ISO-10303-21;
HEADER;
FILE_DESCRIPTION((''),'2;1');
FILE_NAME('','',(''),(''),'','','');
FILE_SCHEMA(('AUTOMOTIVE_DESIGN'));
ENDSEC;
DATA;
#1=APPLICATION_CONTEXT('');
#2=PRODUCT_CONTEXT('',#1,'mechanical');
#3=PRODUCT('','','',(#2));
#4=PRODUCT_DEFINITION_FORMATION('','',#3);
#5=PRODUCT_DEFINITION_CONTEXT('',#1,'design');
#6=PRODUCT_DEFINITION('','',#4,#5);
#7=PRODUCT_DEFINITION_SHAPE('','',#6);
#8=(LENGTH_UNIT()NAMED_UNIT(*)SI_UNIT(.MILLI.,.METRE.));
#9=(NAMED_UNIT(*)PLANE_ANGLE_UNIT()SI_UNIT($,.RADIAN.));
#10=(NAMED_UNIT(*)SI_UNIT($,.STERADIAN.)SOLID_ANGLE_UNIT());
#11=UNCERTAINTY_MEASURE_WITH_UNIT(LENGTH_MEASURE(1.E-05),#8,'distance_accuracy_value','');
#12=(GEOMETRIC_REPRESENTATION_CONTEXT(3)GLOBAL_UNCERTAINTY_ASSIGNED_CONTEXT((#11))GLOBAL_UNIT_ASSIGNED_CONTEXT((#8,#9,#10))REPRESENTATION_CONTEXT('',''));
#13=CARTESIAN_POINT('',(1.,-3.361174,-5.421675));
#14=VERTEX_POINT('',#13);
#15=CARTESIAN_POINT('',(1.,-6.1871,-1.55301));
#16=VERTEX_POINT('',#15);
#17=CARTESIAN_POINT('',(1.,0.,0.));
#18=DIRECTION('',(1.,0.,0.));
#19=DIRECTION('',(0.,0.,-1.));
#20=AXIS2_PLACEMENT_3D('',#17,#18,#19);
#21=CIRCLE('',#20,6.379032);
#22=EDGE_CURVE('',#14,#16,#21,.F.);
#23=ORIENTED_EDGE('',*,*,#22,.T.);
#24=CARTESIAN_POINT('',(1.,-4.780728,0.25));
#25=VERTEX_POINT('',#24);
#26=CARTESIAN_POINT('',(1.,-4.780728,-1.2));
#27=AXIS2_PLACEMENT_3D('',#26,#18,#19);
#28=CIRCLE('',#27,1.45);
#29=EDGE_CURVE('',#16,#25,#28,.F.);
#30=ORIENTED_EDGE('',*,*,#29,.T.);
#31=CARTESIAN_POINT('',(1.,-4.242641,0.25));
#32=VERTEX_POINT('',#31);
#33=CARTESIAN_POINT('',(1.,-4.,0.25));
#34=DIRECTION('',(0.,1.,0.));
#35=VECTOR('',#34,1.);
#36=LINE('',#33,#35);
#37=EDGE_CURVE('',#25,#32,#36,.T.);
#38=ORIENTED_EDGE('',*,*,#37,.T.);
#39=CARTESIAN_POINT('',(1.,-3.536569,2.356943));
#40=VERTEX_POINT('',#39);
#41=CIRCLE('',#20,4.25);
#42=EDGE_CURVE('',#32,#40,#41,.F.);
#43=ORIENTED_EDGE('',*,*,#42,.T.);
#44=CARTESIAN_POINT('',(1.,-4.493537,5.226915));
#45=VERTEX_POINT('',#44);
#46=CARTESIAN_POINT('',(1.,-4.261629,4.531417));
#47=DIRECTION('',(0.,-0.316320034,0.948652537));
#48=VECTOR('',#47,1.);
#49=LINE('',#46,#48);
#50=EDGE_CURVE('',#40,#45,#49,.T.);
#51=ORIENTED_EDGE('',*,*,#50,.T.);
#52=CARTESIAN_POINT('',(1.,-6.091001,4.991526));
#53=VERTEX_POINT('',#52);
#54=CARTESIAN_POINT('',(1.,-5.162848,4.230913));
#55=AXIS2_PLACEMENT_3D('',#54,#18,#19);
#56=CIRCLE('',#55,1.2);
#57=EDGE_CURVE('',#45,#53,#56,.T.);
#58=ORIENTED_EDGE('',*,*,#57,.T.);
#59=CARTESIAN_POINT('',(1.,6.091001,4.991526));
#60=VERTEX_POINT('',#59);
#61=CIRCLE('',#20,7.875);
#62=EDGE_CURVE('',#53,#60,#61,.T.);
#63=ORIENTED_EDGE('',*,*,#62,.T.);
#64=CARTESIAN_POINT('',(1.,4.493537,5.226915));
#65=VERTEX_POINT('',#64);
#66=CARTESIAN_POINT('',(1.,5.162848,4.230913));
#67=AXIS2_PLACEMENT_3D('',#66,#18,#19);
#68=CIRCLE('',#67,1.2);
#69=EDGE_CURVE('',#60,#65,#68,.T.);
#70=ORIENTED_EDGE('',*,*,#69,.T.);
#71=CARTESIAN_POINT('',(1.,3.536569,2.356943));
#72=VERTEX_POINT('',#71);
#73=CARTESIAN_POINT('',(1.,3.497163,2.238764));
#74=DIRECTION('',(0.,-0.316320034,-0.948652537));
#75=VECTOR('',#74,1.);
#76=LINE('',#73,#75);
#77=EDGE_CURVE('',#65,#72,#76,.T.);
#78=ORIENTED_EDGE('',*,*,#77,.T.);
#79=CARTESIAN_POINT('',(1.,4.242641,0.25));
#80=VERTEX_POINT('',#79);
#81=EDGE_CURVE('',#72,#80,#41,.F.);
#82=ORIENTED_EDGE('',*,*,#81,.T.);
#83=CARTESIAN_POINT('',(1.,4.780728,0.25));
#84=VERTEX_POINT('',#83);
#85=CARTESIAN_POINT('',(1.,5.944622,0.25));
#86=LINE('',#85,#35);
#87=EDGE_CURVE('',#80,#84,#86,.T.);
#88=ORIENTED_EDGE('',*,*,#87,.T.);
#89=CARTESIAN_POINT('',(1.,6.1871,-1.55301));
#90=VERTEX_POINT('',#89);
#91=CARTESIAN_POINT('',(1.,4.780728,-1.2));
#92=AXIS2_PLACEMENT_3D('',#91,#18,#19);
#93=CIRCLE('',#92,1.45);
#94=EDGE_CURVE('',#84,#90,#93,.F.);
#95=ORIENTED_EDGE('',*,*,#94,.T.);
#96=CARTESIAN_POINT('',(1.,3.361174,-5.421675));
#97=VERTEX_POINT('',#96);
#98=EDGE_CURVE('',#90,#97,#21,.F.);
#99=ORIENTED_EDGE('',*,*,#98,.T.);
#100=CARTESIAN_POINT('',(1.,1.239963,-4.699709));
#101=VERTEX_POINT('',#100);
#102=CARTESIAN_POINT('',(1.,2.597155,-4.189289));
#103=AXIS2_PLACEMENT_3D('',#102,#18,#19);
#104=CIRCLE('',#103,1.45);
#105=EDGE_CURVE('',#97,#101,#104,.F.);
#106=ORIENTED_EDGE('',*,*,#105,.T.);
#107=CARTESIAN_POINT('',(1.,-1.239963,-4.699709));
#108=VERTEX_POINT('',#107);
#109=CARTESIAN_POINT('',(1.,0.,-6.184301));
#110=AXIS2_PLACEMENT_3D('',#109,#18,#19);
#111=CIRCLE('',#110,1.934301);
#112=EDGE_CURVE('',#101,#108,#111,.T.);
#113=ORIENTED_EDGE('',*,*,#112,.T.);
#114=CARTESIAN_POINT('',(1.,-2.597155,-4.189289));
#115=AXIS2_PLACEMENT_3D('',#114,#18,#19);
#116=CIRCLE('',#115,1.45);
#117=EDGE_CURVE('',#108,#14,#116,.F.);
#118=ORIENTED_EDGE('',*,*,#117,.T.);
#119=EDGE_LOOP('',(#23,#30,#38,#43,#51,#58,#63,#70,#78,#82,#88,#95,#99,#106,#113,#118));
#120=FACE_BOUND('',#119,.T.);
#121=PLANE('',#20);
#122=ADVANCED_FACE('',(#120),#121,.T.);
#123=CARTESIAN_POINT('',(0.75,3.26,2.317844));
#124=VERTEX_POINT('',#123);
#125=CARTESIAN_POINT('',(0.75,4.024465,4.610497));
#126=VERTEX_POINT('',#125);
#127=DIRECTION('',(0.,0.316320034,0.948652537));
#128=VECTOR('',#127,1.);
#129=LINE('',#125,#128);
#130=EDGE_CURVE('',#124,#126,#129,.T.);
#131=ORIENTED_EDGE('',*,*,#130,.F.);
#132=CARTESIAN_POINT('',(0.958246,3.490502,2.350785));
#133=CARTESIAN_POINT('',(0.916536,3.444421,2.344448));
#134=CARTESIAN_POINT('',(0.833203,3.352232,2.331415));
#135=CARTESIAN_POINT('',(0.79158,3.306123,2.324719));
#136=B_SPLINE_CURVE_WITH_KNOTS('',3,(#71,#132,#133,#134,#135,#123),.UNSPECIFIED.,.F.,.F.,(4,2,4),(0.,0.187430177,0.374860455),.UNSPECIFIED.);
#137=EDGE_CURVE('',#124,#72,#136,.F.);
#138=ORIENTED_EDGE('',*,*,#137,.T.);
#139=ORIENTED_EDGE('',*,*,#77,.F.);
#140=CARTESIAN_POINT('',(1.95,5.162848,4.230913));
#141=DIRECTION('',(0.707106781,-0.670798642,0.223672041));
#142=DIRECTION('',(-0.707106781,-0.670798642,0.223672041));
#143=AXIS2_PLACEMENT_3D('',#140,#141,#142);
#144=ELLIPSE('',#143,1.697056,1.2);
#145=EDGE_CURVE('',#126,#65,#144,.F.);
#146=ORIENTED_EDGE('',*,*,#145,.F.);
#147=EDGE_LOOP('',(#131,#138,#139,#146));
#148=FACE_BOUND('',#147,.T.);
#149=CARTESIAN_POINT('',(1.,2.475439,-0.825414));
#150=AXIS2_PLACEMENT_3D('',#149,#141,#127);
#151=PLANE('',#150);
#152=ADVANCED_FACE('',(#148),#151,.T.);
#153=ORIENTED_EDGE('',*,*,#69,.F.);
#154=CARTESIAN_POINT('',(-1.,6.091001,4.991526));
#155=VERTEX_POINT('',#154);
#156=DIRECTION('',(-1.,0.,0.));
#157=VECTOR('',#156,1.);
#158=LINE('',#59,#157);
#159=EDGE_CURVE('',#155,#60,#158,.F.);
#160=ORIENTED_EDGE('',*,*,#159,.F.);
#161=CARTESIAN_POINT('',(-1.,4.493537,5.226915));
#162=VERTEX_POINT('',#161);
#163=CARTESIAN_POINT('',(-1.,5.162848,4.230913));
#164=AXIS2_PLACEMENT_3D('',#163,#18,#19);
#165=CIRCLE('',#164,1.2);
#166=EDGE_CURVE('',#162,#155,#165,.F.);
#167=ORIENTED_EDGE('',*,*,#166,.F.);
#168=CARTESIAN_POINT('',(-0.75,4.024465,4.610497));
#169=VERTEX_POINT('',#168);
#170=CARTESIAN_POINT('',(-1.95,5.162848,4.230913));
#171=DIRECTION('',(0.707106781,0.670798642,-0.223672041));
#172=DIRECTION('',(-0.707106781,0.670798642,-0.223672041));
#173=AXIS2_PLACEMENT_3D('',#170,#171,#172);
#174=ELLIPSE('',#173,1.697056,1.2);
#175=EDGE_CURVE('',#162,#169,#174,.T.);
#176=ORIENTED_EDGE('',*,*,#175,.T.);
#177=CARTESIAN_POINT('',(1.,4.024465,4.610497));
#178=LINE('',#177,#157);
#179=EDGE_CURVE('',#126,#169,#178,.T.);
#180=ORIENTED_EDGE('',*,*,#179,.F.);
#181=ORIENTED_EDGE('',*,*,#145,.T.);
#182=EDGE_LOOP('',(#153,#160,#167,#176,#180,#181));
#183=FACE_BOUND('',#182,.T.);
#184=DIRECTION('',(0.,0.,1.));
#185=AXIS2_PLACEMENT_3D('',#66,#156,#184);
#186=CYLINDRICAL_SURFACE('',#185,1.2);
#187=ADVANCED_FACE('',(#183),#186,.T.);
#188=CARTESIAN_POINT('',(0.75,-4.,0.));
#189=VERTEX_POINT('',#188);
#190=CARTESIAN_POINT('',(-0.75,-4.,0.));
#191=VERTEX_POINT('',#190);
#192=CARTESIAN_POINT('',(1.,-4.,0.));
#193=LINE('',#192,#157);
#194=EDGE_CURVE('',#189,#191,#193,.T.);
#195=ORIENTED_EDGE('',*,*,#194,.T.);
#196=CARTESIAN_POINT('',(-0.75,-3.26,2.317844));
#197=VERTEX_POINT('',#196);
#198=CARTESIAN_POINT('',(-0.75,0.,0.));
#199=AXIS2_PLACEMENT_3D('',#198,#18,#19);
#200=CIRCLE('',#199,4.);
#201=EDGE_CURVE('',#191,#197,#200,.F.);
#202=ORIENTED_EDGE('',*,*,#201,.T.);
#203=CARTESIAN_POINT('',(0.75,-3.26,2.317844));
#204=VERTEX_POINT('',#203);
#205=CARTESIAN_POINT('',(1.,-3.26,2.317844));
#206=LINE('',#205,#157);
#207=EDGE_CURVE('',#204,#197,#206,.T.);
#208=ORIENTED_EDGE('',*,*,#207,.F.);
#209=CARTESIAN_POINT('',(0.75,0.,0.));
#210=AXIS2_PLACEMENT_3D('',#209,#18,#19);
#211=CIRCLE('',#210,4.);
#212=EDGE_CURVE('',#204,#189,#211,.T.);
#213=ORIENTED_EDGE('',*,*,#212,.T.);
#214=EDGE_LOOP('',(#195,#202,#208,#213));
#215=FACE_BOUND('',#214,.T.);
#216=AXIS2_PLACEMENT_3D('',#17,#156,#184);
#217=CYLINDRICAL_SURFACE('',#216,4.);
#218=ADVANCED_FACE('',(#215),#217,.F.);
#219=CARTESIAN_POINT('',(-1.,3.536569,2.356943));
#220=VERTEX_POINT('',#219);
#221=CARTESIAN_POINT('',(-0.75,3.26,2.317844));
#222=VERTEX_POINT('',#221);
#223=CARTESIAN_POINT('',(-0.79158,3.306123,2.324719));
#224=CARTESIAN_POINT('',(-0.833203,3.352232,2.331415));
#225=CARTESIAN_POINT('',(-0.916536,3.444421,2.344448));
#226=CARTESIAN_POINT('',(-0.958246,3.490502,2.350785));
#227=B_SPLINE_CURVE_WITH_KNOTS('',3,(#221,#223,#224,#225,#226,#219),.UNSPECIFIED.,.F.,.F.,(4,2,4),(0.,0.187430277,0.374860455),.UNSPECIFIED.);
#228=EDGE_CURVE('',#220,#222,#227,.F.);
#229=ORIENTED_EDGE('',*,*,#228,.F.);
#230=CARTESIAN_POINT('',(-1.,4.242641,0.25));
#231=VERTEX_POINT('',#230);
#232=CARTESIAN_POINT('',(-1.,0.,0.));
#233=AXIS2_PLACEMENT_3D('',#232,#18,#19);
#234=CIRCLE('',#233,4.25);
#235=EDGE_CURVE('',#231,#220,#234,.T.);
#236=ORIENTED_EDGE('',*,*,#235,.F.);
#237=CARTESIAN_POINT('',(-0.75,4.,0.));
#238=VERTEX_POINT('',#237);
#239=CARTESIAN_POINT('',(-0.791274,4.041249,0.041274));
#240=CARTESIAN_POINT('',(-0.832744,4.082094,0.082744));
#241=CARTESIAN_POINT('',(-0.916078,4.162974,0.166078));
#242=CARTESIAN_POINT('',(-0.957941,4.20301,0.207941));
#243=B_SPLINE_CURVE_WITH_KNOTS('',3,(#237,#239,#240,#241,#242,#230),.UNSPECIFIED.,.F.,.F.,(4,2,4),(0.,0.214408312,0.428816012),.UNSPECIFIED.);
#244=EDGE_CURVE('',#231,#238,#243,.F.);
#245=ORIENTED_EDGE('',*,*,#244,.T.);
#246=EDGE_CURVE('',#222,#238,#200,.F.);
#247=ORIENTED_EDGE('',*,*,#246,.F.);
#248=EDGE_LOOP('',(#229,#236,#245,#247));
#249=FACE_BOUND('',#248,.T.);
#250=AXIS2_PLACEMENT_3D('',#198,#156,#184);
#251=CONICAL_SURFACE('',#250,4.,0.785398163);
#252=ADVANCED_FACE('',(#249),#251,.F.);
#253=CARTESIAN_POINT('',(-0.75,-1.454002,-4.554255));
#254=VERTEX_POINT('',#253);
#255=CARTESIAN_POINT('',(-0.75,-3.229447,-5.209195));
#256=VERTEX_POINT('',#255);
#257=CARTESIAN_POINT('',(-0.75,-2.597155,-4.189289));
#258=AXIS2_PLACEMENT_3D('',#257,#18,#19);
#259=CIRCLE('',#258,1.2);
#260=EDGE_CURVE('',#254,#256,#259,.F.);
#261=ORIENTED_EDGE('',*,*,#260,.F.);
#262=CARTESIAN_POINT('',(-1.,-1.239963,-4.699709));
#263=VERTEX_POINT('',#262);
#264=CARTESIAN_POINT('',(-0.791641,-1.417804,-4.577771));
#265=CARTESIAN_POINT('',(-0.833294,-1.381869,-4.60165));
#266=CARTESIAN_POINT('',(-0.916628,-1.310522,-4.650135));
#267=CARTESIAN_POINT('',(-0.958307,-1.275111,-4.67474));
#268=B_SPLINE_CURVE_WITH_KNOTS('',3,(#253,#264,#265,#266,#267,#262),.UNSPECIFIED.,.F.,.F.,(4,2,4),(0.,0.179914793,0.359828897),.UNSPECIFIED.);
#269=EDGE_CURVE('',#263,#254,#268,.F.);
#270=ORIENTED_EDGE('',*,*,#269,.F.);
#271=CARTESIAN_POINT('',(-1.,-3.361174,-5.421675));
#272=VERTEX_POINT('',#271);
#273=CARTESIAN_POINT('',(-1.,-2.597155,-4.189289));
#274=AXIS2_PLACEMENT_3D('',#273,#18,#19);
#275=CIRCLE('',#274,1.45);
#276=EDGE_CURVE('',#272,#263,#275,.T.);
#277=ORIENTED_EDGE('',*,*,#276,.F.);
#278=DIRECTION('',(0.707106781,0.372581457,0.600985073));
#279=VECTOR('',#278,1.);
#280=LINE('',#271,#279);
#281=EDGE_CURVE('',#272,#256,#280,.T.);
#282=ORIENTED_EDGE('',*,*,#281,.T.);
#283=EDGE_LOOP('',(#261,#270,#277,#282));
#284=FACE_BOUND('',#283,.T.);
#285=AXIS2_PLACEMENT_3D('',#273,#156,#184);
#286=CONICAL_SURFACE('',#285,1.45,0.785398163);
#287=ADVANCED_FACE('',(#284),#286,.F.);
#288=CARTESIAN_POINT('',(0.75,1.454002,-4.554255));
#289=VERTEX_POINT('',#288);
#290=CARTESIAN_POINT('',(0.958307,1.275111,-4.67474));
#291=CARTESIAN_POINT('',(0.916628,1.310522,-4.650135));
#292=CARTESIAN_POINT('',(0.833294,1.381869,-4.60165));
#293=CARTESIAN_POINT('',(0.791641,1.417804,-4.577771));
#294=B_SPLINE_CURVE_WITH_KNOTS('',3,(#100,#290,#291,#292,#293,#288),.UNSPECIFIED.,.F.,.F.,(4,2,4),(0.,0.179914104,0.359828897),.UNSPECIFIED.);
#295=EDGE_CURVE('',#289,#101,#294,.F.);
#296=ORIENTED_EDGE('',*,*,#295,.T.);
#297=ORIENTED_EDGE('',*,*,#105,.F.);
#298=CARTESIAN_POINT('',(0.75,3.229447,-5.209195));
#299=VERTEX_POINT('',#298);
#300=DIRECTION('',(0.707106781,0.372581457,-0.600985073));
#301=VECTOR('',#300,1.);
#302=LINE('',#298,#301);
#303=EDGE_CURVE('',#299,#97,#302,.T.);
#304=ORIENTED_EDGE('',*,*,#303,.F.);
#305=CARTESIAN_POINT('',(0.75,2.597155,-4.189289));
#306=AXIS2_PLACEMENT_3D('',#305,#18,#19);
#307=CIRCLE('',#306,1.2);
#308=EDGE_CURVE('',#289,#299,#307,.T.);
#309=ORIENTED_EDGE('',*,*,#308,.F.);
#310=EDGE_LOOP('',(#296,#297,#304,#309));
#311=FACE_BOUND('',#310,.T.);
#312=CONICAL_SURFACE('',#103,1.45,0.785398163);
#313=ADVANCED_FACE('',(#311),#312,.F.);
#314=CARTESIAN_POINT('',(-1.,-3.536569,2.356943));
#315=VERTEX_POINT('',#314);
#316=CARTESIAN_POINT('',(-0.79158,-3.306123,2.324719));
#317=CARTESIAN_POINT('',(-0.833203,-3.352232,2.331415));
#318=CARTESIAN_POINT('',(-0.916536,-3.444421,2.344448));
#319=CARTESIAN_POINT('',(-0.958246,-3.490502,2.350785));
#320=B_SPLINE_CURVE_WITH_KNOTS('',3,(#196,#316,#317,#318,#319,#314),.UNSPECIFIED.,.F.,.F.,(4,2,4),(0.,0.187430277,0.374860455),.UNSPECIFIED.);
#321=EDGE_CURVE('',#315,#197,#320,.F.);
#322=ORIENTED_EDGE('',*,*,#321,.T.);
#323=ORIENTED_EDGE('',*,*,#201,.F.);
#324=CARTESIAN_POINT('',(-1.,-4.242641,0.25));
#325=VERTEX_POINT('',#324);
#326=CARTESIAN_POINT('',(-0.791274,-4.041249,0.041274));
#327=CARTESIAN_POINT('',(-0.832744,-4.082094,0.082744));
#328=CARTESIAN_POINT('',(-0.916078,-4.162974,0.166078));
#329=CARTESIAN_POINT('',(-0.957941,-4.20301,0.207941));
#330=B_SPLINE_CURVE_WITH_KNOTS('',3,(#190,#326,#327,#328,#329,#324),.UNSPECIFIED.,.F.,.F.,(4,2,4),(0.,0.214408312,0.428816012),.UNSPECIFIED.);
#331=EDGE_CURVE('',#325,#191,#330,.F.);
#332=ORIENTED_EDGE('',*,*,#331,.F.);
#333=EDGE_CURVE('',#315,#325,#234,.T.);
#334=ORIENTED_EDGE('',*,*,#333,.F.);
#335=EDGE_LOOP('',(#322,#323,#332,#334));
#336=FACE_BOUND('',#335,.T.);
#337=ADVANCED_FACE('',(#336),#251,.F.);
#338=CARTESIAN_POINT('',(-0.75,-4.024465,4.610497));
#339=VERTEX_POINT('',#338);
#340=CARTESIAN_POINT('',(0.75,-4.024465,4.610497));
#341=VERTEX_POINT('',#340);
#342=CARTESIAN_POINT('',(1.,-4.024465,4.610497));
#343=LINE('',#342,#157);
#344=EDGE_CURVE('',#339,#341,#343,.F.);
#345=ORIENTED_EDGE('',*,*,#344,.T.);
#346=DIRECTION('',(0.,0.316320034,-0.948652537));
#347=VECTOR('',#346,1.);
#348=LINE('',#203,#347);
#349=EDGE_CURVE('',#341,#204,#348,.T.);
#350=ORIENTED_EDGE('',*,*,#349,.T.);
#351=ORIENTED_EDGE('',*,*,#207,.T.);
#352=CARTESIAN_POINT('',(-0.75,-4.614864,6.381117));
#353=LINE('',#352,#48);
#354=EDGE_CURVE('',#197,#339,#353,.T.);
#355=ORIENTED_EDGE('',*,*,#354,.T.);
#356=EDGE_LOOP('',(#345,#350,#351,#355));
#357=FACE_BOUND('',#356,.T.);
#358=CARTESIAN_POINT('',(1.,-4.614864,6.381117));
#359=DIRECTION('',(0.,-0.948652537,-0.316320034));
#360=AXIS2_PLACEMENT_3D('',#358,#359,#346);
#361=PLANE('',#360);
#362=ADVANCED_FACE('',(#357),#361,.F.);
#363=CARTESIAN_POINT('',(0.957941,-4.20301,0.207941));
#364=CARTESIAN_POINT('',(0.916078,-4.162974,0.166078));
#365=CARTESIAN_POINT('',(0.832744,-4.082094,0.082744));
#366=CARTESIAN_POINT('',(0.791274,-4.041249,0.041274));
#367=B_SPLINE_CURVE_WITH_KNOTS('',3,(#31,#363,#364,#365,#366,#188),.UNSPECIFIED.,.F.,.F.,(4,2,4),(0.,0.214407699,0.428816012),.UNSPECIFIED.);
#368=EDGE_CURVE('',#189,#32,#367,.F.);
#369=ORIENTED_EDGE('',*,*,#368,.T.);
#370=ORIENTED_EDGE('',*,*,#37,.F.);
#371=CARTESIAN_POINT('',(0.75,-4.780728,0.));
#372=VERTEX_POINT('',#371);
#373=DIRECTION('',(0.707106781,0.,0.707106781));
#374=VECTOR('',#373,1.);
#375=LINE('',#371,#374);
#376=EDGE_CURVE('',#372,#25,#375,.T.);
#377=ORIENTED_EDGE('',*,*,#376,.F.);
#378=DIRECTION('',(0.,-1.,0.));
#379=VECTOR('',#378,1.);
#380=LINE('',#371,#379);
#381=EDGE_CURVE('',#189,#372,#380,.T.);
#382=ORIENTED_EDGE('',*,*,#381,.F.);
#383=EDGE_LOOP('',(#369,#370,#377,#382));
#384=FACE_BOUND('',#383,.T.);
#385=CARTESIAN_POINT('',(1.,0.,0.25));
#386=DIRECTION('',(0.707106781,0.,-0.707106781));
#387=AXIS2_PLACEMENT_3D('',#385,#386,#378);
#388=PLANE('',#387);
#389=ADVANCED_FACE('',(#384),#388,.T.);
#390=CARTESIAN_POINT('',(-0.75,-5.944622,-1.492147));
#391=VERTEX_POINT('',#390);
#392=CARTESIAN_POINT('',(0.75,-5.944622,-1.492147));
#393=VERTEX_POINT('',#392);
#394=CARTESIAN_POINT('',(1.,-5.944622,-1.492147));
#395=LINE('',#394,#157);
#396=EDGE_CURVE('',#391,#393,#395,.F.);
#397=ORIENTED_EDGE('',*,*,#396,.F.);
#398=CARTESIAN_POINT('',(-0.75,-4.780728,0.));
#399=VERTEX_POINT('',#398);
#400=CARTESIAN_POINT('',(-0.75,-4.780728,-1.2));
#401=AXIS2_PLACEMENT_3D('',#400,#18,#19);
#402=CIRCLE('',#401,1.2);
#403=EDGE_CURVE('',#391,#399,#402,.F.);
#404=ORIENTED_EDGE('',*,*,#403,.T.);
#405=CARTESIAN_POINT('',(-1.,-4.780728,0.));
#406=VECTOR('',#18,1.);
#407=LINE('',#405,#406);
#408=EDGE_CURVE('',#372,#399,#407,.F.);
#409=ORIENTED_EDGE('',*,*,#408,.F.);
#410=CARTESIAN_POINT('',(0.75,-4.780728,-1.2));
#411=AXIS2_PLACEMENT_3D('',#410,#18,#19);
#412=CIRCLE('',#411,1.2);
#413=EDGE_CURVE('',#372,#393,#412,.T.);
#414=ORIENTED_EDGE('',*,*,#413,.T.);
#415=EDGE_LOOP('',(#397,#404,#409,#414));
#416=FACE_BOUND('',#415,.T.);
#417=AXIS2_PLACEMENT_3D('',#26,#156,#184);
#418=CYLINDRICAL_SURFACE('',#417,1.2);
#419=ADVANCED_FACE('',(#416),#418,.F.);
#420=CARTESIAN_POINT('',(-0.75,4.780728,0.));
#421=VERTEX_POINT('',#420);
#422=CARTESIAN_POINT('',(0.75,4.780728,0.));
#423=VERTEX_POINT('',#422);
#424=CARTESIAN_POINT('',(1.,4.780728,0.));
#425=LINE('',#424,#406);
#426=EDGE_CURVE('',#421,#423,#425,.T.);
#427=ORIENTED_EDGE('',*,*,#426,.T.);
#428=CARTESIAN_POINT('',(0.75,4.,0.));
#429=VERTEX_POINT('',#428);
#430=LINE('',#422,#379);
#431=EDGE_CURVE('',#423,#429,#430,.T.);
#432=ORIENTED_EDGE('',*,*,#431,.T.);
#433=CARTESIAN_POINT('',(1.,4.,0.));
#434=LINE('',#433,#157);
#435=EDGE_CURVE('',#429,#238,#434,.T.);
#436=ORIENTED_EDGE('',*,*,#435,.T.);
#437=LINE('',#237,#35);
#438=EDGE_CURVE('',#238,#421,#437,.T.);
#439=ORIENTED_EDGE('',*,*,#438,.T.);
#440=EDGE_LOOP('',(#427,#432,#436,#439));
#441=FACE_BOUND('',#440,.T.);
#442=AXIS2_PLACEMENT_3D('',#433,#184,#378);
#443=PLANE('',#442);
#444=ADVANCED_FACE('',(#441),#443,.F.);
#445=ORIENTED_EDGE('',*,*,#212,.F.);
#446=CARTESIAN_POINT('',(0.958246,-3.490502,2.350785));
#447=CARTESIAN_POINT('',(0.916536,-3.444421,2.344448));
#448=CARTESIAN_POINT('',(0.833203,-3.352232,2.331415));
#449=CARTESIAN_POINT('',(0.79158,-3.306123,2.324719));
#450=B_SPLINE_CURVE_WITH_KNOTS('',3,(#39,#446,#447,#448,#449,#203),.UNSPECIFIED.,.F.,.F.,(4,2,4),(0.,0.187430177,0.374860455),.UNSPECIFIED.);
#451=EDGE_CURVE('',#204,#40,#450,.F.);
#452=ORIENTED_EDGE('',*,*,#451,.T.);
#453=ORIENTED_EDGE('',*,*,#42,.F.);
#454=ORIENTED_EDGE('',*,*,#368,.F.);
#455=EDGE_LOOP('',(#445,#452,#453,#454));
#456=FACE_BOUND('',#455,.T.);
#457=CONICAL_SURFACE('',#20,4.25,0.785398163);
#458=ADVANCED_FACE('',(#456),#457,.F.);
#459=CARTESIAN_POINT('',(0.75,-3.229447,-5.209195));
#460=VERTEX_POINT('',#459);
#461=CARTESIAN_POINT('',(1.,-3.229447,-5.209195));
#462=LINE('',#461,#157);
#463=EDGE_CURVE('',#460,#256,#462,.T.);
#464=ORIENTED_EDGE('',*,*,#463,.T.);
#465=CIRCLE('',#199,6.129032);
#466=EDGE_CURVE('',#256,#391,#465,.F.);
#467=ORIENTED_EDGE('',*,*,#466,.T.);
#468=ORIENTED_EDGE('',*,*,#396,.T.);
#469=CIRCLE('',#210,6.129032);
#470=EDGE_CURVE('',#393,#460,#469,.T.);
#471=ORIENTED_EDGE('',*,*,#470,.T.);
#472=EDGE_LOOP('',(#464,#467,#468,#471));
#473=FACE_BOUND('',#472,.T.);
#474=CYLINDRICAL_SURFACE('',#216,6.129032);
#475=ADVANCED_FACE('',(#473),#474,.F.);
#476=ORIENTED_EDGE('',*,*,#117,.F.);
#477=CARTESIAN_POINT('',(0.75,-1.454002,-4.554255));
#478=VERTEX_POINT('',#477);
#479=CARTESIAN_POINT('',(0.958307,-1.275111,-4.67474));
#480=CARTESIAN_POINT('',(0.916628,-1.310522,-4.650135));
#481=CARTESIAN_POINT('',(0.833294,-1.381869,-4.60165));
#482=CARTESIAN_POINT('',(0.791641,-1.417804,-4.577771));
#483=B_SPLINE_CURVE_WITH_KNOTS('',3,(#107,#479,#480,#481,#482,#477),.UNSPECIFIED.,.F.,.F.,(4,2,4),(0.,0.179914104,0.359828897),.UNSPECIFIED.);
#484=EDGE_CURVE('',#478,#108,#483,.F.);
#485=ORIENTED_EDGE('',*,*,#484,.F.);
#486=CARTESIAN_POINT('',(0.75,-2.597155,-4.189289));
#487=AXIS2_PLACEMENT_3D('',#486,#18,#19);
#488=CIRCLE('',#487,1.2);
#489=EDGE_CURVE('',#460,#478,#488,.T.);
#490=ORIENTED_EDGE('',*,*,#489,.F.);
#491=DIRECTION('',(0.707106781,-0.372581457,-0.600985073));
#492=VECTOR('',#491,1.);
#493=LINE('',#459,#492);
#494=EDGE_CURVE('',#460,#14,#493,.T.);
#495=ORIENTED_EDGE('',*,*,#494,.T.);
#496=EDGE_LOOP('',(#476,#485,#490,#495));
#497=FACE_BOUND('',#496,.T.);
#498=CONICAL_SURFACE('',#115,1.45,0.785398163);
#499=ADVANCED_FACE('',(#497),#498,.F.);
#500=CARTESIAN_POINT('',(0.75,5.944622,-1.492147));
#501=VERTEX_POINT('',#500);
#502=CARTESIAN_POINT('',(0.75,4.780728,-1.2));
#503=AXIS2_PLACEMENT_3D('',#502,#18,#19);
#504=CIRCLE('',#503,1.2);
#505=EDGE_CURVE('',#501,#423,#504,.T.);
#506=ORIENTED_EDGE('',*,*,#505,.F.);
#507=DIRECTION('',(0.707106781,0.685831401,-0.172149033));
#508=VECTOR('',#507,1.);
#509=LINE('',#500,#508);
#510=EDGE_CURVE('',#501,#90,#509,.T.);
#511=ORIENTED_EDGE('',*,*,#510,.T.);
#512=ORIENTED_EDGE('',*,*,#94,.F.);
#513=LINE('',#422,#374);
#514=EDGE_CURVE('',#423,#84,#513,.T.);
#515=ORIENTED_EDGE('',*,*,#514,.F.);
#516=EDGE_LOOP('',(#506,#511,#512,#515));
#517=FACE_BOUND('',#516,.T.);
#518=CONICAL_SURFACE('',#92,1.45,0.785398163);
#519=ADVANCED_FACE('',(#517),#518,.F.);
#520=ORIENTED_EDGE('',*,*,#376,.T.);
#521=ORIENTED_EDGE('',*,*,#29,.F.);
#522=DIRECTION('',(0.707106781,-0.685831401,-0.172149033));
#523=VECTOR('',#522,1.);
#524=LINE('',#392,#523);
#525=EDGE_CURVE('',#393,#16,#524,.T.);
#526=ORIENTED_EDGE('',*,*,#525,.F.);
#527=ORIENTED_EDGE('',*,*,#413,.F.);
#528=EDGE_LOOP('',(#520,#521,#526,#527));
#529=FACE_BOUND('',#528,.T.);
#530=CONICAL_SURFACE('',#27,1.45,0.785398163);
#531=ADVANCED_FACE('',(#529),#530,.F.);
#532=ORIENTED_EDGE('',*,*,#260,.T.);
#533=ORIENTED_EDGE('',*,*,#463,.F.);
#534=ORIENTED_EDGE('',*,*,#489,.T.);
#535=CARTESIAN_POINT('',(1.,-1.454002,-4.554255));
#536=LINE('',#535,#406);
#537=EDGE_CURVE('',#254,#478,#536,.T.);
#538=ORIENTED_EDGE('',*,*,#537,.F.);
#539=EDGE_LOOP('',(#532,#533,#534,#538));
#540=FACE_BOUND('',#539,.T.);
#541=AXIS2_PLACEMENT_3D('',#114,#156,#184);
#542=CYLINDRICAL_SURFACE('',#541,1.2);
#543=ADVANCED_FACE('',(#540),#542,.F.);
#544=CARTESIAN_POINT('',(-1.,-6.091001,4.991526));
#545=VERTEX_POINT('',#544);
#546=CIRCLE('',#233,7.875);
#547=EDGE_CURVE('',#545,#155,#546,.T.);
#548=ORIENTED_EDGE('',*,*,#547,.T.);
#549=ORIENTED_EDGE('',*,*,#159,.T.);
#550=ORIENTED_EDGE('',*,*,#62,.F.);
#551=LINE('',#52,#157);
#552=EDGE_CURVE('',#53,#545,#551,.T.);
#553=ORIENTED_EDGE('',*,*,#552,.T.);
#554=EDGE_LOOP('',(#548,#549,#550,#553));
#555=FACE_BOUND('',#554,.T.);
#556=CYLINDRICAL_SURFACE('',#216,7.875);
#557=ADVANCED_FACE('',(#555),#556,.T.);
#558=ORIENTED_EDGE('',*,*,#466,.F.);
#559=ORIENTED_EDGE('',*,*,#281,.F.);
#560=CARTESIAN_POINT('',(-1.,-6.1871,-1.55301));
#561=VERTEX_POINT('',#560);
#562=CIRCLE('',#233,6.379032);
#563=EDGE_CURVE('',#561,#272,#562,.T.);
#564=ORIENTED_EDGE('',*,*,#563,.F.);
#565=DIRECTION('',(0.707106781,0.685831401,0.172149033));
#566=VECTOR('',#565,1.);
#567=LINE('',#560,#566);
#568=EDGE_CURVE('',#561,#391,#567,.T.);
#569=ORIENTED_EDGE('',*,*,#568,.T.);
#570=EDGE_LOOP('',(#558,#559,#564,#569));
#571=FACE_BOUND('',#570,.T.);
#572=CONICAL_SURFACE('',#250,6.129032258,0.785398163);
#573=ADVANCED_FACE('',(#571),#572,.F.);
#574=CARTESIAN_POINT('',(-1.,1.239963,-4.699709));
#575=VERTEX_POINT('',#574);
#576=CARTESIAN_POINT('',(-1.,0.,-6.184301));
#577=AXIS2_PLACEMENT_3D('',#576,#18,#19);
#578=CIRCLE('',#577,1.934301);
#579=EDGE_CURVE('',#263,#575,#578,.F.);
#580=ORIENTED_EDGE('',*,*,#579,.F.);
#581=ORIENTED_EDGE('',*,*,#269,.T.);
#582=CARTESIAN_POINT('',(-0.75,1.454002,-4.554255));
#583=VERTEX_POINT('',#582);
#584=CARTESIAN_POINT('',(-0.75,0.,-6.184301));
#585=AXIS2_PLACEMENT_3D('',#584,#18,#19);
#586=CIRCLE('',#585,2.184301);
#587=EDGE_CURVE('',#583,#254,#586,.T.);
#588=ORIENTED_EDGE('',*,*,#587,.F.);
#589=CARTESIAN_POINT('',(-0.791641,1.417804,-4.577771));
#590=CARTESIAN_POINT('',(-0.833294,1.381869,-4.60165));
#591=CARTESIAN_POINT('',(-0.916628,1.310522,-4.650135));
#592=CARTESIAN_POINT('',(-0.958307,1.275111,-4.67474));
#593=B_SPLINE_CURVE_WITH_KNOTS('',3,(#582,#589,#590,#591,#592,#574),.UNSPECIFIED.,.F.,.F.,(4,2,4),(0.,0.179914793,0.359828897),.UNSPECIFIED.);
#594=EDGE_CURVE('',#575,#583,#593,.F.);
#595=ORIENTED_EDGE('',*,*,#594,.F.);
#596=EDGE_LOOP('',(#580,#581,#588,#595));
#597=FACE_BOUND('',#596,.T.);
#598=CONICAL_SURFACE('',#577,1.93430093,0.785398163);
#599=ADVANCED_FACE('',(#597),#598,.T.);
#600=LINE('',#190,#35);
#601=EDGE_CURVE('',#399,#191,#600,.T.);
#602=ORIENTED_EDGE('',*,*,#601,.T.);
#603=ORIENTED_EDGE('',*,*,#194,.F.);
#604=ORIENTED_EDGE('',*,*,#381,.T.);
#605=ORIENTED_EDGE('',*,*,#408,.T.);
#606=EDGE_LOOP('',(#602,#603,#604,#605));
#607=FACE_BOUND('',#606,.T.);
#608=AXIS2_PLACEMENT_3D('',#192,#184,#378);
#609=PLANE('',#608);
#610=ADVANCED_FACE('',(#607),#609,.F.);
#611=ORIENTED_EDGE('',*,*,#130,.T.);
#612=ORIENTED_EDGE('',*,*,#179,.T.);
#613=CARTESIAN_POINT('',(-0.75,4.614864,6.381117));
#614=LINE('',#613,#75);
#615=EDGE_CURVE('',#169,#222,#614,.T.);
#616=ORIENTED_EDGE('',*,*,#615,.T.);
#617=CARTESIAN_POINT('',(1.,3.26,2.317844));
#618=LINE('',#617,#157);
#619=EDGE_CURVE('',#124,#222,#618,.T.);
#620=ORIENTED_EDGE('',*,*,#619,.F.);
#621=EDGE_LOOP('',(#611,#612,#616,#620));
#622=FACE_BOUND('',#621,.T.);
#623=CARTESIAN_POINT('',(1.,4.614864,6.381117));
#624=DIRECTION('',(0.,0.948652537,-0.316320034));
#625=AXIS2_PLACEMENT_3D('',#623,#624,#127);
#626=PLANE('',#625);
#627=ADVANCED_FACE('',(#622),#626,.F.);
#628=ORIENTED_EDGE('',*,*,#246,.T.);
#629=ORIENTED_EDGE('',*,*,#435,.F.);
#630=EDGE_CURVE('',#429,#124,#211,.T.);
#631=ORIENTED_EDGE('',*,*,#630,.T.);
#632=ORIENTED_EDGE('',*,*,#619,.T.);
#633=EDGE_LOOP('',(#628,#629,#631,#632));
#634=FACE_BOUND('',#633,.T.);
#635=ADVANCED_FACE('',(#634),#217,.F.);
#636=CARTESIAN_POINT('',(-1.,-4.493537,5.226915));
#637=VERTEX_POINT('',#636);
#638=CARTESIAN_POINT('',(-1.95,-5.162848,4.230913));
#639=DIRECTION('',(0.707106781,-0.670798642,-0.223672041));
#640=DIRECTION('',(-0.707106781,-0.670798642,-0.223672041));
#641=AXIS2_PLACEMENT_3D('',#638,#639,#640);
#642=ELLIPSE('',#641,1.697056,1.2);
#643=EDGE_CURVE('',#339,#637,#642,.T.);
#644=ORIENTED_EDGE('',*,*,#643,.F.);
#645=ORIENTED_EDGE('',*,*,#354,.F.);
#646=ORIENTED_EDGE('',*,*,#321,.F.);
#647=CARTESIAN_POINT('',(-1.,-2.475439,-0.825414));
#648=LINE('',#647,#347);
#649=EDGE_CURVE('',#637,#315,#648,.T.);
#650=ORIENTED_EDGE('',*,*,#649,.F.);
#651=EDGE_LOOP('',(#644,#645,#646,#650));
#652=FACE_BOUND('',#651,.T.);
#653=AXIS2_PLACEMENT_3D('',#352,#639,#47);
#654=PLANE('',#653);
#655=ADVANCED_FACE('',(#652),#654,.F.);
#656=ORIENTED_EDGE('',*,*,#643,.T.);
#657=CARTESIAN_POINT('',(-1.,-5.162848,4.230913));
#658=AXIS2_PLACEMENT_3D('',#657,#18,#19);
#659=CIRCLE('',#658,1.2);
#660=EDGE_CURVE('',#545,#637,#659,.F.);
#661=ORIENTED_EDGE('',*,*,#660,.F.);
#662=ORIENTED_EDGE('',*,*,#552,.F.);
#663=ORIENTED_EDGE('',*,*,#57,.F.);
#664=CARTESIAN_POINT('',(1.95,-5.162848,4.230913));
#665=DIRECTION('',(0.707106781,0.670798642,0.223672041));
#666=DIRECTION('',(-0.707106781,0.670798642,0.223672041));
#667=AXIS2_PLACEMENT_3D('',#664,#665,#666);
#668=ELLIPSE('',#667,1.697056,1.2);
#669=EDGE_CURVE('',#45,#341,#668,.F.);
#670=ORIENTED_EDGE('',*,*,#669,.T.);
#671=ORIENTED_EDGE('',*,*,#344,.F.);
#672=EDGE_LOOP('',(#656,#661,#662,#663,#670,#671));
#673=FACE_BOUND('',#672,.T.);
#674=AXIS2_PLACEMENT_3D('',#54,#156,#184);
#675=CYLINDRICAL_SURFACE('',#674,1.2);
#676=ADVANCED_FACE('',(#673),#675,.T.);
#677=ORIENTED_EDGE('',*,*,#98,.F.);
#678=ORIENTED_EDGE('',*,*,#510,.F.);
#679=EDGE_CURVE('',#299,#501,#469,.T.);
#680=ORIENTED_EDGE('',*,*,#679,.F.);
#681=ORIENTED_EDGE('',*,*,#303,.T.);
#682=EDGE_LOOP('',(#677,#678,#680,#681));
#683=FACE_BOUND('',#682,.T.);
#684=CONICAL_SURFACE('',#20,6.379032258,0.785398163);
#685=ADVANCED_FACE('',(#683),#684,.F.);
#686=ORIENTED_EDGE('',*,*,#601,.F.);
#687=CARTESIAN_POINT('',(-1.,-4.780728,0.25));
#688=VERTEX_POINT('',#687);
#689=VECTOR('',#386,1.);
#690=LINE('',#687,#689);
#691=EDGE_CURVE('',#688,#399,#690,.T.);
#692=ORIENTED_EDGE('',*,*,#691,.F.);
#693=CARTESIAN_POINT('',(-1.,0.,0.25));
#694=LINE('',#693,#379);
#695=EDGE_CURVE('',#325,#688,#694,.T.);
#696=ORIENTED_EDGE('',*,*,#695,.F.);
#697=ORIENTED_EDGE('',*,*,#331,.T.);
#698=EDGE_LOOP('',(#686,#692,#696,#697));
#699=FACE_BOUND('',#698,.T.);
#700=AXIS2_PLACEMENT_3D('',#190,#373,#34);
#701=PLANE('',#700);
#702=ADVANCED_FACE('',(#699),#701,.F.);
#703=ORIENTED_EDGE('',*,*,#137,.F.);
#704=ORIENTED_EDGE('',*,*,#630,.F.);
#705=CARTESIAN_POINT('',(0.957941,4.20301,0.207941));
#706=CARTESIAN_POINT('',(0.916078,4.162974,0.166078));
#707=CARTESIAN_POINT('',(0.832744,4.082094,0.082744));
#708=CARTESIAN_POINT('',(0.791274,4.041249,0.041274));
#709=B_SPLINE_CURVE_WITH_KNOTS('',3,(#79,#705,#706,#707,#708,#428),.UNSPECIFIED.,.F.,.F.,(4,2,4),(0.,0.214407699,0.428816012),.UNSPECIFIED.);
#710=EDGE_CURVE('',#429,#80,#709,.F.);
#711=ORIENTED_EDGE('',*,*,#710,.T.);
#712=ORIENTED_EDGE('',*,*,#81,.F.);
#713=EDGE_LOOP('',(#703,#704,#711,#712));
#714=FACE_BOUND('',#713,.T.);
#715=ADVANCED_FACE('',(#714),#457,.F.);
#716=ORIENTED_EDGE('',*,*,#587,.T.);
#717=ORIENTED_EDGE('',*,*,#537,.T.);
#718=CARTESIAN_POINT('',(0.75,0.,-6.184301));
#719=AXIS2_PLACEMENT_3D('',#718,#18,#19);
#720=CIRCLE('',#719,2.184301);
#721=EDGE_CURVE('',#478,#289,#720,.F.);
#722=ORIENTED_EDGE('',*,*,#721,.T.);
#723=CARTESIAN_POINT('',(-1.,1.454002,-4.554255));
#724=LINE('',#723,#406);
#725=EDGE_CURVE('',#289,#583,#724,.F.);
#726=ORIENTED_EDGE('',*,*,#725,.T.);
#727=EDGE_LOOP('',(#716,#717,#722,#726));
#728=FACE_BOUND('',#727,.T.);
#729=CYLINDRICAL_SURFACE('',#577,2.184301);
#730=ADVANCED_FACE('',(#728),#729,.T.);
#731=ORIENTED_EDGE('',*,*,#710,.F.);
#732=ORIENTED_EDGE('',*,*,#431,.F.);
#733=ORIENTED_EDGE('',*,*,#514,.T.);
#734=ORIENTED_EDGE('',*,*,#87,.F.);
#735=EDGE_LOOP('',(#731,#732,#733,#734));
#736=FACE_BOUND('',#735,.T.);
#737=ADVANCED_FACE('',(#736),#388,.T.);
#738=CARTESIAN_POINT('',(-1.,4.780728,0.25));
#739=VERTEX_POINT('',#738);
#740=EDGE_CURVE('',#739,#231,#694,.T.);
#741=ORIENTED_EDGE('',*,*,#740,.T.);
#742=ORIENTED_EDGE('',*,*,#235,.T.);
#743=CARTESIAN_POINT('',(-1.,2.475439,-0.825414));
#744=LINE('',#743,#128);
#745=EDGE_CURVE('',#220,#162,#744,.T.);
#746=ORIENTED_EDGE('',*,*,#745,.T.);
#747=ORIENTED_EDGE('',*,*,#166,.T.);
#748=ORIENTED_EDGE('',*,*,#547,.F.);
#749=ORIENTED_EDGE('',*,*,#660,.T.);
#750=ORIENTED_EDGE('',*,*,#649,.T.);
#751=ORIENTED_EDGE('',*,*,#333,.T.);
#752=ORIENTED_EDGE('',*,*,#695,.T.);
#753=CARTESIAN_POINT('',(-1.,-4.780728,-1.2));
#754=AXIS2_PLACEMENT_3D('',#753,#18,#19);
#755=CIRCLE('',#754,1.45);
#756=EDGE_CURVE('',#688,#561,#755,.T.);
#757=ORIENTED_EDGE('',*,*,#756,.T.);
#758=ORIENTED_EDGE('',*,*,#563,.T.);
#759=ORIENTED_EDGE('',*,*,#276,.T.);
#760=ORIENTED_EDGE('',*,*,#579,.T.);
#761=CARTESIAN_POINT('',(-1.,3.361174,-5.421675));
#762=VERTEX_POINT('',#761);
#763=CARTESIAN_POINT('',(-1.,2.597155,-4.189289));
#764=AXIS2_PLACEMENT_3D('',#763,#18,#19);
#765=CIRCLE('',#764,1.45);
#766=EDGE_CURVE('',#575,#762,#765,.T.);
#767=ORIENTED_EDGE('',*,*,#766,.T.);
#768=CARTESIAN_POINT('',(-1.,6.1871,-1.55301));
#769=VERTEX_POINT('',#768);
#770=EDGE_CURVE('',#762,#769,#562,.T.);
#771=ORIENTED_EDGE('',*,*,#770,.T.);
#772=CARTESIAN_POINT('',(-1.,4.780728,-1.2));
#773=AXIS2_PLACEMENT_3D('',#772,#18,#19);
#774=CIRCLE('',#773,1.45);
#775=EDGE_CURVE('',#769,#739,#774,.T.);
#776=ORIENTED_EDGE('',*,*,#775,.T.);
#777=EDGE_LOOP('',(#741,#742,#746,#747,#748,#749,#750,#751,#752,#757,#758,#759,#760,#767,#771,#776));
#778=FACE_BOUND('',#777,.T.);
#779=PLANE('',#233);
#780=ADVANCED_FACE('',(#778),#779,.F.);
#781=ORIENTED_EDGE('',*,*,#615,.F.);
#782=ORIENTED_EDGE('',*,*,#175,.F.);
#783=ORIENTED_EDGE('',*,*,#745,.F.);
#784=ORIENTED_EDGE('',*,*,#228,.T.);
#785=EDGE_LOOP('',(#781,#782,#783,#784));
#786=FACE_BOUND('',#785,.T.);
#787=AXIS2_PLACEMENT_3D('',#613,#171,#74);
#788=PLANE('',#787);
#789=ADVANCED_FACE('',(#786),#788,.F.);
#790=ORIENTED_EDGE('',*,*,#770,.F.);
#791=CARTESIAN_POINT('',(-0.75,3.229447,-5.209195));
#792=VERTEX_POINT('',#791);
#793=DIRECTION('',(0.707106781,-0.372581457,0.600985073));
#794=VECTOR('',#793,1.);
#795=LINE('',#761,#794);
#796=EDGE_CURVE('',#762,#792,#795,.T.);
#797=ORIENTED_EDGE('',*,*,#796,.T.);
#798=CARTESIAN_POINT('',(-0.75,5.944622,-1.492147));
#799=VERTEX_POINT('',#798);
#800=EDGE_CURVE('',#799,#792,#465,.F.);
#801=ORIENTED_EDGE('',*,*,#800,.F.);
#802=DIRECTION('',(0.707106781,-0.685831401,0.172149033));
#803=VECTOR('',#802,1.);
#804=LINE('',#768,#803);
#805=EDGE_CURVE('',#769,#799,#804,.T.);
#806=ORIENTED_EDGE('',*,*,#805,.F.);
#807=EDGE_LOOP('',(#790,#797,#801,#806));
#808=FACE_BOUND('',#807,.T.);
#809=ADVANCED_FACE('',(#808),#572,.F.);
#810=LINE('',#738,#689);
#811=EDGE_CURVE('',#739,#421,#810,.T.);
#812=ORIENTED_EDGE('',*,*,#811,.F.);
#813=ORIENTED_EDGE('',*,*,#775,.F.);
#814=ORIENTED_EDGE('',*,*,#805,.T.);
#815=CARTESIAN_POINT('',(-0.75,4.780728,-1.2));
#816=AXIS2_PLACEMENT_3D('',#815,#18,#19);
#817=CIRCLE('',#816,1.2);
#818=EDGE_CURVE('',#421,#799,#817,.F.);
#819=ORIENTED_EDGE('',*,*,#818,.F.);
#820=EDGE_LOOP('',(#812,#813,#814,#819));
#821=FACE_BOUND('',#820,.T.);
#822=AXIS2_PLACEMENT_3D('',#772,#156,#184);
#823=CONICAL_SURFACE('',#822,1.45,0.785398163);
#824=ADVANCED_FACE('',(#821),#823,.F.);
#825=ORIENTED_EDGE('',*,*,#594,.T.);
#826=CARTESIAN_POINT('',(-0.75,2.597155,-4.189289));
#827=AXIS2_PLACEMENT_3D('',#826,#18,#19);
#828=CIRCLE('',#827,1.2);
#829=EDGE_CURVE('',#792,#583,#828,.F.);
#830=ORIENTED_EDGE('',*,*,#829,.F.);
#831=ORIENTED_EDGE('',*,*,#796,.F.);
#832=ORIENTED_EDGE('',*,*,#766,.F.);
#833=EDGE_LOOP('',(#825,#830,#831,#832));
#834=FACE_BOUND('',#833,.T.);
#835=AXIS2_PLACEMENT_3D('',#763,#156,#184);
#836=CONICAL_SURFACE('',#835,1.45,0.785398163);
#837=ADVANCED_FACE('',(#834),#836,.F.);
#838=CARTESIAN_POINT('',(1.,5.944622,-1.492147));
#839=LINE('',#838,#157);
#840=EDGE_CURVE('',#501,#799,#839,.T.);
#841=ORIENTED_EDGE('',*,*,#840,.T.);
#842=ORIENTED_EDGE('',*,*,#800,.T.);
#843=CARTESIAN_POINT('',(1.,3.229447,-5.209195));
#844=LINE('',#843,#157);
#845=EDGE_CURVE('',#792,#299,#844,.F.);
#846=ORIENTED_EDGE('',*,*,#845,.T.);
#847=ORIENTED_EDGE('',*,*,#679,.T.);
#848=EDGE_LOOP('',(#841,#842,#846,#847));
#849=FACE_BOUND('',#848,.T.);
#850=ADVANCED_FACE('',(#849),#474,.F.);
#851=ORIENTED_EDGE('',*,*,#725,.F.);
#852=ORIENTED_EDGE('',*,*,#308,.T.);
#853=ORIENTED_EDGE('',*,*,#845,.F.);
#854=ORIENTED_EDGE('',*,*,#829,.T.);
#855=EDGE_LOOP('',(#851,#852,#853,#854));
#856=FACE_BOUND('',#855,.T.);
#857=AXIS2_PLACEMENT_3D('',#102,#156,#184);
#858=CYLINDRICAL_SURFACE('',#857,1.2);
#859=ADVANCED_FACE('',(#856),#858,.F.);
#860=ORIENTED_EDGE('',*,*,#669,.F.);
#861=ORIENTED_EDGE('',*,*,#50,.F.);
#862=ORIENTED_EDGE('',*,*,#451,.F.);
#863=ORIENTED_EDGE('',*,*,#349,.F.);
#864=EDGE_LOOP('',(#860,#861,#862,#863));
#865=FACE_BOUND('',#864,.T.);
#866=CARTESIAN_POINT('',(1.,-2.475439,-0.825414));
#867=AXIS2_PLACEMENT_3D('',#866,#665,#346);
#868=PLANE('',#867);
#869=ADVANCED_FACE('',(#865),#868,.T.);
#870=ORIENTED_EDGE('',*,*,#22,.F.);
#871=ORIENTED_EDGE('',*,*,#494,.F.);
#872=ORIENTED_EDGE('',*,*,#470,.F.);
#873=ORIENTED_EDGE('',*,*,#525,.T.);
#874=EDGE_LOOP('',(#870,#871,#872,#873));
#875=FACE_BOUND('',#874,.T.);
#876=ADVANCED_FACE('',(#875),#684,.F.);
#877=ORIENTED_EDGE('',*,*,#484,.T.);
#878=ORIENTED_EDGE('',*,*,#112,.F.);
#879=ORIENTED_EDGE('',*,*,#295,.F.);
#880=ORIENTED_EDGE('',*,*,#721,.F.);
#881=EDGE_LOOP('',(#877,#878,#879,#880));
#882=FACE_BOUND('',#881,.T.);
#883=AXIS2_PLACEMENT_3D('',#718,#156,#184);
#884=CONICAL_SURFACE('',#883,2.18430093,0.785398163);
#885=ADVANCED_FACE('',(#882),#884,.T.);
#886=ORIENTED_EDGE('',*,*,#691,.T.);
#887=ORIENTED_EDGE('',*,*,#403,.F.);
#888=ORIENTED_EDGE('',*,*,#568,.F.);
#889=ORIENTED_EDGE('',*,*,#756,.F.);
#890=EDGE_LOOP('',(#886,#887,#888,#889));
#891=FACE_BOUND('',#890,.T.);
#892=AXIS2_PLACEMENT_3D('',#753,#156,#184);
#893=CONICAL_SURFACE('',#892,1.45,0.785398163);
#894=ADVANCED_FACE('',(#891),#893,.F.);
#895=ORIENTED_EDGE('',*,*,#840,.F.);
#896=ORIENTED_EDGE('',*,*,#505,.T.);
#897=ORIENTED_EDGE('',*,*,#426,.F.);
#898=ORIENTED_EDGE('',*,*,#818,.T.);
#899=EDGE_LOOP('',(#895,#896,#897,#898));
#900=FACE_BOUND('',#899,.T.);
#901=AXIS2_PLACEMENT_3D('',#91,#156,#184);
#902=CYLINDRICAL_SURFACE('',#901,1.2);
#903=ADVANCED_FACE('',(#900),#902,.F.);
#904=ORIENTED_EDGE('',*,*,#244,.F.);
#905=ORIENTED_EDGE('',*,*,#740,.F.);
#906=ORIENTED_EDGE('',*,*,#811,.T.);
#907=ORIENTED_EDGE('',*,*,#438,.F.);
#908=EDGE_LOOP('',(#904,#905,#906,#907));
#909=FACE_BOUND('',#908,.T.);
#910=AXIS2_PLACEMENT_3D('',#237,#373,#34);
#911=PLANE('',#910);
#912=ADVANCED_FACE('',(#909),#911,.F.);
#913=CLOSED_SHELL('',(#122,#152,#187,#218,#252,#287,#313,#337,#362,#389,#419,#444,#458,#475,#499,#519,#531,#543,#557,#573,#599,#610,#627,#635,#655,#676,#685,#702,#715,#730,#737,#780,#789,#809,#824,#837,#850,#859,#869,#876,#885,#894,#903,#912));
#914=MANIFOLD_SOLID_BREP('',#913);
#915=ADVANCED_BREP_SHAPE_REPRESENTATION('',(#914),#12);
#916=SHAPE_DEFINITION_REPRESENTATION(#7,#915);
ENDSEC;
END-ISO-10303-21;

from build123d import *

# Parameters (mm, degrees)
EXTRUDE1_DEPTH          = 1
FILLET1_R               = 1.2
CUT_EXTRUDE1_DEPTH      = 12.181737343
CUT_EXTRUDE1_DEPTH_BACK = 12.181737343
CHAMFER1_SIZE           = 0.25


with BuildPart() as part:
    # Sketch1 → Extrude1 (new, symmetric)
    with BuildSketch(Plane(origin=(0, 0, 0), x_dir=(0, 0, -1), z_dir=(1, 0, 0))):
        with BuildLine():
            Line((-6.381117354, -4.614863629), (-2.317843826, -3.26))
            ThreePointArc((-2.317843826, -3.26), (-1.216552506, -3.810511777), (0, -4))
            Line((0, -4), (0, -6.129032258))
            ThreePointArc((0, -6.129032258), (3.615250795, -4.949242175), (5.8386874, -1.864072388))
            Line((5.8386874, -1.864072388), (3.810511777, -1.216552506))
            ThreePointArc((3.810511777, -1.216552506), (4, 0), (3.810511777, 1.216552506))
            Line((3.810511777, 1.216552506), (5.8386874, 1.864072388))
            ThreePointArc((5.8386874, 1.864072388), (3.615250795, 4.949242175), (0, 6.129032258))
            Line((0, 6.129032258), (0, 4))
            ThreePointArc((0, 4), (-1.216552506, 3.810511777), (-2.317843826, 3.26))
            Line((-2.317843826, 3.26), (-6.381117354, 4.614863629))
            ThreePointArc((-6.381117354, 4.614863629), (7.875, 0), (-6.381117354, -4.614863629))
        make_face()
    extrude(amount=EXTRUDE1_DEPTH, both=True)

    # Fillet1
    fillet1_edges = [part.edges().sort_by_distance(p)[0] for p in [
        (0, -4.614863629, 6.381117354),
        (0, -6.129032258, 0),
        (0, -1.864072388, -5.8386874),
        (0, 1.864072388, -5.8386874),
        (0, 6.129032258, 0),
        (0, 4.614863629, 6.381117354),
    ]]
    fillet(fillet1_edges, radius=FILLET1_R)

    # Sketch4 → Cut-Extrude1 (cut, two sides: drawn at the far end of the back side and taken through both)
    with BuildSketch(Plane(origin=(0, 0, 0), x_dir=(0, 0, -1), z_dir=(1, 0, 0)).offset(-CUT_EXTRUDE1_DEPTH_BACK)):
        with BuildLine():
            Line((0, 4.780727874), (0, -4.780727874))
            ThreePointArc((0, -4.780727874), (0.461953903, -5.726924448), (1.492146597, -5.944622356))
            ThreePointArc((1.492146597, -5.944622356), (3.615250795, -4.949242175), (5.209194703, -3.229446851))
            ThreePointArc((5.209194703, -3.229446851), (5.315130469, -2.181846269), (4.554254966, -1.454001619))
            ThreePointArc((4.554254966, -1.454001619), (4, 0), (4.554254966, 1.454001619))
            ThreePointArc((4.554254966, 1.454001619), (5.315130469, 2.181846269), (5.209194703, 3.229446851))
            ThreePointArc((5.209194703, 3.229446851), (3.615250795, 4.949242175), (1.492146597, 5.944622356))
            ThreePointArc((1.492146597, 5.944622356), (0.461953903, 5.726924448), (0, 4.780727874))
        make_face()
    extrude(amount=CUT_EXTRUDE1_DEPTH + CUT_EXTRUDE1_DEPTH_BACK, mode=Mode.SUBTRACT)

    # Chamfer1
    # the kernel refuses this chamfer: 0.25 mm, written as the material it takes off along each edge
    with BuildSketch(Plane(origin=(1, 3.056631288, 1.707935428), x_dir=(0, 0.9486525372163972, -0.31632003356235944), z_dir=(0, 0.31632003356235944, 0.9486525372163972)), Plane(origin=(-1, 3.056631288, 1.707935428), x_dir=(1, 0, 0), z_dir=(0, 0.31632003356235944, 0.9486525372163972)), Plane(origin=(-1, -4.370192178, 5.647340899), x_dir=(1, 0, 0), z_dir=(0, 0.3163200335623596, -0.9486525372163971))) as chamfer1_piece_1:
        Polygon((CHAMFER1_SIZE, 0), (0, CHAMFER1_SIZE), (0, 0), align=None)
    extrude(amount=4.15263262, mode=Mode.SUBTRACT)
    with BuildSketch(Plane(origin=(1, 0, 0), x_dir=(0, 0.9871090886928867, -0.16004888946787105), z_dir=(0, -0.16004888946787105, -0.9871090886928867))) as chamfer1_piece_2:
        Polygon((4 + CHAMFER1_SIZE, 0), (4, -CHAMFER1_SIZE), (4, 0), align=None)
    revolve(axis=Axis((1, 0, 0), (1, 0, 0)), revolution_arc=53.832106013, mode=Mode.SUBTRACT)
    with BuildSketch(Plane(origin=(1, 4.780727874, -1.2), x_dir=(0, 0, 1), z_dir=(0, -1, 0))) as chamfer1_piece_3:
        Polygon((1.2 + CHAMFER1_SIZE, 0), (1.2, CHAMFER1_SIZE), (1.2, 0), align=None)
    revolve(axis=Axis((1, 4.780727874, -1.2), (-1, 0, 0)), revolution_arc=104.090576784, mode=Mode.SUBTRACT)
    with BuildSketch(Plane(origin=(1, 0, 0), x_dir=(0, 0.5269097493911834, -0.8499212410550288), z_dir=(0, -0.8499212410550288, -0.5269097493911834))) as chamfer1_piece_4:
        Polygon((6.129032258 + CHAMFER1_SIZE, 0), (6.129032258, -CHAMFER1_SIZE), (6.129032258, 0), align=None)
    revolve(axis=Axis((1, 0, 0), (1, 0, 0)), revolution_arc=44.112527376, mode=Mode.SUBTRACT)
    with BuildSketch(Plane(origin=(1, 2.597155152, -4.189289214), x_dir=(0, 0.5269097493911832, -0.8499212410550289), z_dir=(0, 0.8499212410550289, 0.5269097493911832))) as chamfer1_piece_5:
        Polygon((1.2 + CHAMFER1_SIZE, 0), (1.2, CHAMFER1_SIZE), (1.2, 0), align=None)
    revolve(axis=Axis((1, 2.597155152, -4.189289214), (-1, 0, 0)), revolution_arc=134.804277629, mode=Mode.SUBTRACT)
    with BuildSketch(Plane(origin=(1, 0, -6.18430093), x_dir=(0, 0.8535787339825979, 0.5209638614075505), z_dir=(0, 0.5209638614075505, -0.8535787339825979))) as chamfer1_piece_6:
        Polygon((2.18430093 - CHAMFER1_SIZE, 0), (2.18430093, -CHAMFER1_SIZE), (2.18430093, 0), align=None)
    revolve(axis=Axis((1, 0, -6.18430093), (1, 0, 0)), revolution_arc=117.206144707, mode=Mode.SUBTRACT)
    with BuildSketch(Plane(origin=(1, -2.597155152, -4.189289214), x_dir=(0, 0.9743410747854011, 0.22507658693437918), z_dir=(0, -0.22507658693437918, 0.9743410747854011))) as chamfer1_piece_7:
        Polygon((1.2 + CHAMFER1_SIZE, 0), (1.2, CHAMFER1_SIZE), (1.2, 0), align=None)
    revolve(axis=Axis((1, -2.597155152, -4.189289214), (-1, 0, 0)), revolution_arc=134.804277629, mode=Mode.SUBTRACT)
    with BuildSketch(Plane(origin=(1, 0, 0), x_dir=(0, -0.9699120685888933, -0.24345549738219877), z_dir=(0, -0.24345549738219877, 0.9699120685888933))) as chamfer1_piece_8:
        Polygon((6.129032258 + CHAMFER1_SIZE, 0), (6.129032258, -CHAMFER1_SIZE), (6.129032258, 0), align=None)
    revolve(axis=Axis((1, 0, 0), (1, 0, 0)), revolution_arc=44.112527376, mode=Mode.SUBTRACT)
    with BuildSketch(Plane(origin=(1, -4.780727874, -1.2), x_dir=(0, -0.9699120685888935, -0.24345549738219882), z_dir=(0, 0.24345549738219882, -0.9699120685888935))) as chamfer1_piece_9:
        Polygon((1.2 + CHAMFER1_SIZE, 0), (1.2, CHAMFER1_SIZE), (1.2, 0), align=None)
    revolve(axis=Axis((1, -4.780727874, -1.2), (-1, 0, 0)), revolution_arc=104.090576784, mode=Mode.SUBTRACT)
    with BuildSketch(Plane(origin=(1, -3.357079253, 0), x_dir=(0, 0, 1), z_dir=(0, -1, 0)), Plane(origin=(-1, 4.780727874, 0), x_dir=(1, 0, 0), z_dir=(0, -1, 0)), Plane(origin=(-1, -3.357079253, 0), x_dir=(1, 0, 0), z_dir=(0, -1, 0)), Plane(origin=(1, 4.780727874, 0), x_dir=(0, 0, 1), z_dir=(0, -1, 0))) as chamfer1_piece_10:
        Polygon((CHAMFER1_SIZE, 0), (0, CHAMFER1_SIZE), (0, 0), align=None)
    extrude(amount=1.423648621, mode=Mode.SUBTRACT)
    with BuildSketch(Plane(origin=(1, 0, 0), x_dir=(0, -0.7117518247217879, 0.702431021528239), z_dir=(0, 0.702431021528239, 0.7117518247217879))) as chamfer1_piece_11:
        Polygon((4 + CHAMFER1_SIZE, 0), (4, -CHAMFER1_SIZE), (4, 0), align=None)
    revolve(axis=Axis((1, 0, 0), (1, 0, 0)), revolution_arc=53.832106013, mode=Mode.SUBTRACT)
    with BuildSketch(Plane(origin=(1, -4.370192178, 5.647340899), x_dir=(-1, 0, 0), z_dir=(0, 0.3163200335623596, -0.9486525372163971))) as chamfer1_piece_12:
        Polygon((CHAMFER1_SIZE, 0), (0, -CHAMFER1_SIZE), (0, 0), align=None)
    extrude(amount=4.15263262, mode=Mode.SUBTRACT)
    with BuildSketch(Plane(origin=(-1, 0, 0), x_dir=(0, 0.9871090886928867, -0.16004888946787105), z_dir=(0, -0.16004888946787105, -0.9871090886928867))) as chamfer1_piece_13:
        Polygon((4, CHAMFER1_SIZE), (4 + CHAMFER1_SIZE, 0), (4, 0), align=None)
    revolve(axis=Axis((-1, 0, 0), (1, 0, 0)), revolution_arc=53.832106013, mode=Mode.SUBTRACT)
    with BuildSketch(Plane(origin=(-1, 4.780727874, -1.2), x_dir=(0, 0, 1), z_dir=(0, -1, 0))) as chamfer1_piece_14:
        Polygon((1.2, -CHAMFER1_SIZE), (1.2 + CHAMFER1_SIZE, 0), (1.2, 0), align=None)
    revolve(axis=Axis((-1, 4.780727874, -1.2), (-1, 0, 0)), revolution_arc=104.090576784, mode=Mode.SUBTRACT)
    with BuildSketch(Plane(origin=(-1, 0, 0), x_dir=(0, 0.5269097493911834, -0.8499212410550288), z_dir=(0, -0.8499212410550288, -0.5269097493911834))) as chamfer1_piece_15:
        Polygon((6.129032258, CHAMFER1_SIZE), (6.129032258 + CHAMFER1_SIZE, 0), (6.129032258, 0), align=None)
    revolve(axis=Axis((-1, 0, 0), (1, 0, 0)), revolution_arc=44.112527376, mode=Mode.SUBTRACT)
    with BuildSketch(Plane(origin=(-1, 2.597155152, -4.189289214), x_dir=(0, 0.5269097493911832, -0.8499212410550289), z_dir=(0, 0.8499212410550289, 0.5269097493911832))) as chamfer1_piece_16:
        Polygon((1.2, -CHAMFER1_SIZE), (1.2 + CHAMFER1_SIZE, 0), (1.2, 0), align=None)
    revolve(axis=Axis((-1, 2.597155152, -4.189289214), (-1, 0, 0)), revolution_arc=134.804277629, mode=Mode.SUBTRACT)
    with BuildSketch(Plane(origin=(-1, 0, -6.18430093), x_dir=(0, -0.8535787339825973, 0.5209638614075514), z_dir=(0, -0.5209638614075514, -0.8535787339825973))) as chamfer1_piece_17:
        Polygon((2.18430093, -CHAMFER1_SIZE), (2.18430093 - CHAMFER1_SIZE, 0), (2.18430093, 0), align=None)
    revolve(axis=Axis((-1, 0, -6.18430093), (-1, 0, 0)), revolution_arc=117.206144707, mode=Mode.SUBTRACT)
    with BuildSketch(Plane(origin=(-1, -2.597155152, -4.189289214), x_dir=(0, 0.9743410747854011, 0.22507658693437918), z_dir=(0, -0.22507658693437918, 0.9743410747854011))) as chamfer1_piece_18:
        Polygon((1.2, -CHAMFER1_SIZE), (1.2 + CHAMFER1_SIZE, 0), (1.2, 0), align=None)
    revolve(axis=Axis((-1, -2.597155152, -4.189289214), (-1, 0, 0)), revolution_arc=134.804277629, mode=Mode.SUBTRACT)
    with BuildSketch(Plane(origin=(-1, 0, 0), x_dir=(0, -0.9699120685888933, -0.24345549738219877), z_dir=(0, -0.24345549738219877, 0.9699120685888933))) as chamfer1_piece_19:
        Polygon((6.129032258, CHAMFER1_SIZE), (6.129032258 + CHAMFER1_SIZE, 0), (6.129032258, 0), align=None)
    revolve(axis=Axis((-1, 0, 0), (1, 0, 0)), revolution_arc=44.112527376, mode=Mode.SUBTRACT)
    with BuildSketch(Plane(origin=(-1, -4.780727874, -1.2), x_dir=(0, -0.9699120685888935, -0.24345549738219882), z_dir=(0, 0.24345549738219882, -0.9699120685888935))) as chamfer1_piece_20:
        Polygon((1.2, -CHAMFER1_SIZE), (1.2 + CHAMFER1_SIZE, 0), (1.2, 0), align=None)
    revolve(axis=Axis((-1, -4.780727874, -1.2), (-1, 0, 0)), revolution_arc=104.090576784, mode=Mode.SUBTRACT)
    with BuildSketch(Plane(origin=(-1, 0, 0), x_dir=(0, -0.7117518247217879, 0.702431021528239), z_dir=(0, 0.702431021528239, 0.7117518247217879))) as chamfer1_piece_21:
        Polygon((4, CHAMFER1_SIZE), (4 + CHAMFER1_SIZE, 0), (4, 0), align=None)
    revolve(axis=Axis((-1, 0, 0), (1, 0, 0)), revolution_arc=53.832106013, mode=Mode.SUBTRACT)


solid = part.part
